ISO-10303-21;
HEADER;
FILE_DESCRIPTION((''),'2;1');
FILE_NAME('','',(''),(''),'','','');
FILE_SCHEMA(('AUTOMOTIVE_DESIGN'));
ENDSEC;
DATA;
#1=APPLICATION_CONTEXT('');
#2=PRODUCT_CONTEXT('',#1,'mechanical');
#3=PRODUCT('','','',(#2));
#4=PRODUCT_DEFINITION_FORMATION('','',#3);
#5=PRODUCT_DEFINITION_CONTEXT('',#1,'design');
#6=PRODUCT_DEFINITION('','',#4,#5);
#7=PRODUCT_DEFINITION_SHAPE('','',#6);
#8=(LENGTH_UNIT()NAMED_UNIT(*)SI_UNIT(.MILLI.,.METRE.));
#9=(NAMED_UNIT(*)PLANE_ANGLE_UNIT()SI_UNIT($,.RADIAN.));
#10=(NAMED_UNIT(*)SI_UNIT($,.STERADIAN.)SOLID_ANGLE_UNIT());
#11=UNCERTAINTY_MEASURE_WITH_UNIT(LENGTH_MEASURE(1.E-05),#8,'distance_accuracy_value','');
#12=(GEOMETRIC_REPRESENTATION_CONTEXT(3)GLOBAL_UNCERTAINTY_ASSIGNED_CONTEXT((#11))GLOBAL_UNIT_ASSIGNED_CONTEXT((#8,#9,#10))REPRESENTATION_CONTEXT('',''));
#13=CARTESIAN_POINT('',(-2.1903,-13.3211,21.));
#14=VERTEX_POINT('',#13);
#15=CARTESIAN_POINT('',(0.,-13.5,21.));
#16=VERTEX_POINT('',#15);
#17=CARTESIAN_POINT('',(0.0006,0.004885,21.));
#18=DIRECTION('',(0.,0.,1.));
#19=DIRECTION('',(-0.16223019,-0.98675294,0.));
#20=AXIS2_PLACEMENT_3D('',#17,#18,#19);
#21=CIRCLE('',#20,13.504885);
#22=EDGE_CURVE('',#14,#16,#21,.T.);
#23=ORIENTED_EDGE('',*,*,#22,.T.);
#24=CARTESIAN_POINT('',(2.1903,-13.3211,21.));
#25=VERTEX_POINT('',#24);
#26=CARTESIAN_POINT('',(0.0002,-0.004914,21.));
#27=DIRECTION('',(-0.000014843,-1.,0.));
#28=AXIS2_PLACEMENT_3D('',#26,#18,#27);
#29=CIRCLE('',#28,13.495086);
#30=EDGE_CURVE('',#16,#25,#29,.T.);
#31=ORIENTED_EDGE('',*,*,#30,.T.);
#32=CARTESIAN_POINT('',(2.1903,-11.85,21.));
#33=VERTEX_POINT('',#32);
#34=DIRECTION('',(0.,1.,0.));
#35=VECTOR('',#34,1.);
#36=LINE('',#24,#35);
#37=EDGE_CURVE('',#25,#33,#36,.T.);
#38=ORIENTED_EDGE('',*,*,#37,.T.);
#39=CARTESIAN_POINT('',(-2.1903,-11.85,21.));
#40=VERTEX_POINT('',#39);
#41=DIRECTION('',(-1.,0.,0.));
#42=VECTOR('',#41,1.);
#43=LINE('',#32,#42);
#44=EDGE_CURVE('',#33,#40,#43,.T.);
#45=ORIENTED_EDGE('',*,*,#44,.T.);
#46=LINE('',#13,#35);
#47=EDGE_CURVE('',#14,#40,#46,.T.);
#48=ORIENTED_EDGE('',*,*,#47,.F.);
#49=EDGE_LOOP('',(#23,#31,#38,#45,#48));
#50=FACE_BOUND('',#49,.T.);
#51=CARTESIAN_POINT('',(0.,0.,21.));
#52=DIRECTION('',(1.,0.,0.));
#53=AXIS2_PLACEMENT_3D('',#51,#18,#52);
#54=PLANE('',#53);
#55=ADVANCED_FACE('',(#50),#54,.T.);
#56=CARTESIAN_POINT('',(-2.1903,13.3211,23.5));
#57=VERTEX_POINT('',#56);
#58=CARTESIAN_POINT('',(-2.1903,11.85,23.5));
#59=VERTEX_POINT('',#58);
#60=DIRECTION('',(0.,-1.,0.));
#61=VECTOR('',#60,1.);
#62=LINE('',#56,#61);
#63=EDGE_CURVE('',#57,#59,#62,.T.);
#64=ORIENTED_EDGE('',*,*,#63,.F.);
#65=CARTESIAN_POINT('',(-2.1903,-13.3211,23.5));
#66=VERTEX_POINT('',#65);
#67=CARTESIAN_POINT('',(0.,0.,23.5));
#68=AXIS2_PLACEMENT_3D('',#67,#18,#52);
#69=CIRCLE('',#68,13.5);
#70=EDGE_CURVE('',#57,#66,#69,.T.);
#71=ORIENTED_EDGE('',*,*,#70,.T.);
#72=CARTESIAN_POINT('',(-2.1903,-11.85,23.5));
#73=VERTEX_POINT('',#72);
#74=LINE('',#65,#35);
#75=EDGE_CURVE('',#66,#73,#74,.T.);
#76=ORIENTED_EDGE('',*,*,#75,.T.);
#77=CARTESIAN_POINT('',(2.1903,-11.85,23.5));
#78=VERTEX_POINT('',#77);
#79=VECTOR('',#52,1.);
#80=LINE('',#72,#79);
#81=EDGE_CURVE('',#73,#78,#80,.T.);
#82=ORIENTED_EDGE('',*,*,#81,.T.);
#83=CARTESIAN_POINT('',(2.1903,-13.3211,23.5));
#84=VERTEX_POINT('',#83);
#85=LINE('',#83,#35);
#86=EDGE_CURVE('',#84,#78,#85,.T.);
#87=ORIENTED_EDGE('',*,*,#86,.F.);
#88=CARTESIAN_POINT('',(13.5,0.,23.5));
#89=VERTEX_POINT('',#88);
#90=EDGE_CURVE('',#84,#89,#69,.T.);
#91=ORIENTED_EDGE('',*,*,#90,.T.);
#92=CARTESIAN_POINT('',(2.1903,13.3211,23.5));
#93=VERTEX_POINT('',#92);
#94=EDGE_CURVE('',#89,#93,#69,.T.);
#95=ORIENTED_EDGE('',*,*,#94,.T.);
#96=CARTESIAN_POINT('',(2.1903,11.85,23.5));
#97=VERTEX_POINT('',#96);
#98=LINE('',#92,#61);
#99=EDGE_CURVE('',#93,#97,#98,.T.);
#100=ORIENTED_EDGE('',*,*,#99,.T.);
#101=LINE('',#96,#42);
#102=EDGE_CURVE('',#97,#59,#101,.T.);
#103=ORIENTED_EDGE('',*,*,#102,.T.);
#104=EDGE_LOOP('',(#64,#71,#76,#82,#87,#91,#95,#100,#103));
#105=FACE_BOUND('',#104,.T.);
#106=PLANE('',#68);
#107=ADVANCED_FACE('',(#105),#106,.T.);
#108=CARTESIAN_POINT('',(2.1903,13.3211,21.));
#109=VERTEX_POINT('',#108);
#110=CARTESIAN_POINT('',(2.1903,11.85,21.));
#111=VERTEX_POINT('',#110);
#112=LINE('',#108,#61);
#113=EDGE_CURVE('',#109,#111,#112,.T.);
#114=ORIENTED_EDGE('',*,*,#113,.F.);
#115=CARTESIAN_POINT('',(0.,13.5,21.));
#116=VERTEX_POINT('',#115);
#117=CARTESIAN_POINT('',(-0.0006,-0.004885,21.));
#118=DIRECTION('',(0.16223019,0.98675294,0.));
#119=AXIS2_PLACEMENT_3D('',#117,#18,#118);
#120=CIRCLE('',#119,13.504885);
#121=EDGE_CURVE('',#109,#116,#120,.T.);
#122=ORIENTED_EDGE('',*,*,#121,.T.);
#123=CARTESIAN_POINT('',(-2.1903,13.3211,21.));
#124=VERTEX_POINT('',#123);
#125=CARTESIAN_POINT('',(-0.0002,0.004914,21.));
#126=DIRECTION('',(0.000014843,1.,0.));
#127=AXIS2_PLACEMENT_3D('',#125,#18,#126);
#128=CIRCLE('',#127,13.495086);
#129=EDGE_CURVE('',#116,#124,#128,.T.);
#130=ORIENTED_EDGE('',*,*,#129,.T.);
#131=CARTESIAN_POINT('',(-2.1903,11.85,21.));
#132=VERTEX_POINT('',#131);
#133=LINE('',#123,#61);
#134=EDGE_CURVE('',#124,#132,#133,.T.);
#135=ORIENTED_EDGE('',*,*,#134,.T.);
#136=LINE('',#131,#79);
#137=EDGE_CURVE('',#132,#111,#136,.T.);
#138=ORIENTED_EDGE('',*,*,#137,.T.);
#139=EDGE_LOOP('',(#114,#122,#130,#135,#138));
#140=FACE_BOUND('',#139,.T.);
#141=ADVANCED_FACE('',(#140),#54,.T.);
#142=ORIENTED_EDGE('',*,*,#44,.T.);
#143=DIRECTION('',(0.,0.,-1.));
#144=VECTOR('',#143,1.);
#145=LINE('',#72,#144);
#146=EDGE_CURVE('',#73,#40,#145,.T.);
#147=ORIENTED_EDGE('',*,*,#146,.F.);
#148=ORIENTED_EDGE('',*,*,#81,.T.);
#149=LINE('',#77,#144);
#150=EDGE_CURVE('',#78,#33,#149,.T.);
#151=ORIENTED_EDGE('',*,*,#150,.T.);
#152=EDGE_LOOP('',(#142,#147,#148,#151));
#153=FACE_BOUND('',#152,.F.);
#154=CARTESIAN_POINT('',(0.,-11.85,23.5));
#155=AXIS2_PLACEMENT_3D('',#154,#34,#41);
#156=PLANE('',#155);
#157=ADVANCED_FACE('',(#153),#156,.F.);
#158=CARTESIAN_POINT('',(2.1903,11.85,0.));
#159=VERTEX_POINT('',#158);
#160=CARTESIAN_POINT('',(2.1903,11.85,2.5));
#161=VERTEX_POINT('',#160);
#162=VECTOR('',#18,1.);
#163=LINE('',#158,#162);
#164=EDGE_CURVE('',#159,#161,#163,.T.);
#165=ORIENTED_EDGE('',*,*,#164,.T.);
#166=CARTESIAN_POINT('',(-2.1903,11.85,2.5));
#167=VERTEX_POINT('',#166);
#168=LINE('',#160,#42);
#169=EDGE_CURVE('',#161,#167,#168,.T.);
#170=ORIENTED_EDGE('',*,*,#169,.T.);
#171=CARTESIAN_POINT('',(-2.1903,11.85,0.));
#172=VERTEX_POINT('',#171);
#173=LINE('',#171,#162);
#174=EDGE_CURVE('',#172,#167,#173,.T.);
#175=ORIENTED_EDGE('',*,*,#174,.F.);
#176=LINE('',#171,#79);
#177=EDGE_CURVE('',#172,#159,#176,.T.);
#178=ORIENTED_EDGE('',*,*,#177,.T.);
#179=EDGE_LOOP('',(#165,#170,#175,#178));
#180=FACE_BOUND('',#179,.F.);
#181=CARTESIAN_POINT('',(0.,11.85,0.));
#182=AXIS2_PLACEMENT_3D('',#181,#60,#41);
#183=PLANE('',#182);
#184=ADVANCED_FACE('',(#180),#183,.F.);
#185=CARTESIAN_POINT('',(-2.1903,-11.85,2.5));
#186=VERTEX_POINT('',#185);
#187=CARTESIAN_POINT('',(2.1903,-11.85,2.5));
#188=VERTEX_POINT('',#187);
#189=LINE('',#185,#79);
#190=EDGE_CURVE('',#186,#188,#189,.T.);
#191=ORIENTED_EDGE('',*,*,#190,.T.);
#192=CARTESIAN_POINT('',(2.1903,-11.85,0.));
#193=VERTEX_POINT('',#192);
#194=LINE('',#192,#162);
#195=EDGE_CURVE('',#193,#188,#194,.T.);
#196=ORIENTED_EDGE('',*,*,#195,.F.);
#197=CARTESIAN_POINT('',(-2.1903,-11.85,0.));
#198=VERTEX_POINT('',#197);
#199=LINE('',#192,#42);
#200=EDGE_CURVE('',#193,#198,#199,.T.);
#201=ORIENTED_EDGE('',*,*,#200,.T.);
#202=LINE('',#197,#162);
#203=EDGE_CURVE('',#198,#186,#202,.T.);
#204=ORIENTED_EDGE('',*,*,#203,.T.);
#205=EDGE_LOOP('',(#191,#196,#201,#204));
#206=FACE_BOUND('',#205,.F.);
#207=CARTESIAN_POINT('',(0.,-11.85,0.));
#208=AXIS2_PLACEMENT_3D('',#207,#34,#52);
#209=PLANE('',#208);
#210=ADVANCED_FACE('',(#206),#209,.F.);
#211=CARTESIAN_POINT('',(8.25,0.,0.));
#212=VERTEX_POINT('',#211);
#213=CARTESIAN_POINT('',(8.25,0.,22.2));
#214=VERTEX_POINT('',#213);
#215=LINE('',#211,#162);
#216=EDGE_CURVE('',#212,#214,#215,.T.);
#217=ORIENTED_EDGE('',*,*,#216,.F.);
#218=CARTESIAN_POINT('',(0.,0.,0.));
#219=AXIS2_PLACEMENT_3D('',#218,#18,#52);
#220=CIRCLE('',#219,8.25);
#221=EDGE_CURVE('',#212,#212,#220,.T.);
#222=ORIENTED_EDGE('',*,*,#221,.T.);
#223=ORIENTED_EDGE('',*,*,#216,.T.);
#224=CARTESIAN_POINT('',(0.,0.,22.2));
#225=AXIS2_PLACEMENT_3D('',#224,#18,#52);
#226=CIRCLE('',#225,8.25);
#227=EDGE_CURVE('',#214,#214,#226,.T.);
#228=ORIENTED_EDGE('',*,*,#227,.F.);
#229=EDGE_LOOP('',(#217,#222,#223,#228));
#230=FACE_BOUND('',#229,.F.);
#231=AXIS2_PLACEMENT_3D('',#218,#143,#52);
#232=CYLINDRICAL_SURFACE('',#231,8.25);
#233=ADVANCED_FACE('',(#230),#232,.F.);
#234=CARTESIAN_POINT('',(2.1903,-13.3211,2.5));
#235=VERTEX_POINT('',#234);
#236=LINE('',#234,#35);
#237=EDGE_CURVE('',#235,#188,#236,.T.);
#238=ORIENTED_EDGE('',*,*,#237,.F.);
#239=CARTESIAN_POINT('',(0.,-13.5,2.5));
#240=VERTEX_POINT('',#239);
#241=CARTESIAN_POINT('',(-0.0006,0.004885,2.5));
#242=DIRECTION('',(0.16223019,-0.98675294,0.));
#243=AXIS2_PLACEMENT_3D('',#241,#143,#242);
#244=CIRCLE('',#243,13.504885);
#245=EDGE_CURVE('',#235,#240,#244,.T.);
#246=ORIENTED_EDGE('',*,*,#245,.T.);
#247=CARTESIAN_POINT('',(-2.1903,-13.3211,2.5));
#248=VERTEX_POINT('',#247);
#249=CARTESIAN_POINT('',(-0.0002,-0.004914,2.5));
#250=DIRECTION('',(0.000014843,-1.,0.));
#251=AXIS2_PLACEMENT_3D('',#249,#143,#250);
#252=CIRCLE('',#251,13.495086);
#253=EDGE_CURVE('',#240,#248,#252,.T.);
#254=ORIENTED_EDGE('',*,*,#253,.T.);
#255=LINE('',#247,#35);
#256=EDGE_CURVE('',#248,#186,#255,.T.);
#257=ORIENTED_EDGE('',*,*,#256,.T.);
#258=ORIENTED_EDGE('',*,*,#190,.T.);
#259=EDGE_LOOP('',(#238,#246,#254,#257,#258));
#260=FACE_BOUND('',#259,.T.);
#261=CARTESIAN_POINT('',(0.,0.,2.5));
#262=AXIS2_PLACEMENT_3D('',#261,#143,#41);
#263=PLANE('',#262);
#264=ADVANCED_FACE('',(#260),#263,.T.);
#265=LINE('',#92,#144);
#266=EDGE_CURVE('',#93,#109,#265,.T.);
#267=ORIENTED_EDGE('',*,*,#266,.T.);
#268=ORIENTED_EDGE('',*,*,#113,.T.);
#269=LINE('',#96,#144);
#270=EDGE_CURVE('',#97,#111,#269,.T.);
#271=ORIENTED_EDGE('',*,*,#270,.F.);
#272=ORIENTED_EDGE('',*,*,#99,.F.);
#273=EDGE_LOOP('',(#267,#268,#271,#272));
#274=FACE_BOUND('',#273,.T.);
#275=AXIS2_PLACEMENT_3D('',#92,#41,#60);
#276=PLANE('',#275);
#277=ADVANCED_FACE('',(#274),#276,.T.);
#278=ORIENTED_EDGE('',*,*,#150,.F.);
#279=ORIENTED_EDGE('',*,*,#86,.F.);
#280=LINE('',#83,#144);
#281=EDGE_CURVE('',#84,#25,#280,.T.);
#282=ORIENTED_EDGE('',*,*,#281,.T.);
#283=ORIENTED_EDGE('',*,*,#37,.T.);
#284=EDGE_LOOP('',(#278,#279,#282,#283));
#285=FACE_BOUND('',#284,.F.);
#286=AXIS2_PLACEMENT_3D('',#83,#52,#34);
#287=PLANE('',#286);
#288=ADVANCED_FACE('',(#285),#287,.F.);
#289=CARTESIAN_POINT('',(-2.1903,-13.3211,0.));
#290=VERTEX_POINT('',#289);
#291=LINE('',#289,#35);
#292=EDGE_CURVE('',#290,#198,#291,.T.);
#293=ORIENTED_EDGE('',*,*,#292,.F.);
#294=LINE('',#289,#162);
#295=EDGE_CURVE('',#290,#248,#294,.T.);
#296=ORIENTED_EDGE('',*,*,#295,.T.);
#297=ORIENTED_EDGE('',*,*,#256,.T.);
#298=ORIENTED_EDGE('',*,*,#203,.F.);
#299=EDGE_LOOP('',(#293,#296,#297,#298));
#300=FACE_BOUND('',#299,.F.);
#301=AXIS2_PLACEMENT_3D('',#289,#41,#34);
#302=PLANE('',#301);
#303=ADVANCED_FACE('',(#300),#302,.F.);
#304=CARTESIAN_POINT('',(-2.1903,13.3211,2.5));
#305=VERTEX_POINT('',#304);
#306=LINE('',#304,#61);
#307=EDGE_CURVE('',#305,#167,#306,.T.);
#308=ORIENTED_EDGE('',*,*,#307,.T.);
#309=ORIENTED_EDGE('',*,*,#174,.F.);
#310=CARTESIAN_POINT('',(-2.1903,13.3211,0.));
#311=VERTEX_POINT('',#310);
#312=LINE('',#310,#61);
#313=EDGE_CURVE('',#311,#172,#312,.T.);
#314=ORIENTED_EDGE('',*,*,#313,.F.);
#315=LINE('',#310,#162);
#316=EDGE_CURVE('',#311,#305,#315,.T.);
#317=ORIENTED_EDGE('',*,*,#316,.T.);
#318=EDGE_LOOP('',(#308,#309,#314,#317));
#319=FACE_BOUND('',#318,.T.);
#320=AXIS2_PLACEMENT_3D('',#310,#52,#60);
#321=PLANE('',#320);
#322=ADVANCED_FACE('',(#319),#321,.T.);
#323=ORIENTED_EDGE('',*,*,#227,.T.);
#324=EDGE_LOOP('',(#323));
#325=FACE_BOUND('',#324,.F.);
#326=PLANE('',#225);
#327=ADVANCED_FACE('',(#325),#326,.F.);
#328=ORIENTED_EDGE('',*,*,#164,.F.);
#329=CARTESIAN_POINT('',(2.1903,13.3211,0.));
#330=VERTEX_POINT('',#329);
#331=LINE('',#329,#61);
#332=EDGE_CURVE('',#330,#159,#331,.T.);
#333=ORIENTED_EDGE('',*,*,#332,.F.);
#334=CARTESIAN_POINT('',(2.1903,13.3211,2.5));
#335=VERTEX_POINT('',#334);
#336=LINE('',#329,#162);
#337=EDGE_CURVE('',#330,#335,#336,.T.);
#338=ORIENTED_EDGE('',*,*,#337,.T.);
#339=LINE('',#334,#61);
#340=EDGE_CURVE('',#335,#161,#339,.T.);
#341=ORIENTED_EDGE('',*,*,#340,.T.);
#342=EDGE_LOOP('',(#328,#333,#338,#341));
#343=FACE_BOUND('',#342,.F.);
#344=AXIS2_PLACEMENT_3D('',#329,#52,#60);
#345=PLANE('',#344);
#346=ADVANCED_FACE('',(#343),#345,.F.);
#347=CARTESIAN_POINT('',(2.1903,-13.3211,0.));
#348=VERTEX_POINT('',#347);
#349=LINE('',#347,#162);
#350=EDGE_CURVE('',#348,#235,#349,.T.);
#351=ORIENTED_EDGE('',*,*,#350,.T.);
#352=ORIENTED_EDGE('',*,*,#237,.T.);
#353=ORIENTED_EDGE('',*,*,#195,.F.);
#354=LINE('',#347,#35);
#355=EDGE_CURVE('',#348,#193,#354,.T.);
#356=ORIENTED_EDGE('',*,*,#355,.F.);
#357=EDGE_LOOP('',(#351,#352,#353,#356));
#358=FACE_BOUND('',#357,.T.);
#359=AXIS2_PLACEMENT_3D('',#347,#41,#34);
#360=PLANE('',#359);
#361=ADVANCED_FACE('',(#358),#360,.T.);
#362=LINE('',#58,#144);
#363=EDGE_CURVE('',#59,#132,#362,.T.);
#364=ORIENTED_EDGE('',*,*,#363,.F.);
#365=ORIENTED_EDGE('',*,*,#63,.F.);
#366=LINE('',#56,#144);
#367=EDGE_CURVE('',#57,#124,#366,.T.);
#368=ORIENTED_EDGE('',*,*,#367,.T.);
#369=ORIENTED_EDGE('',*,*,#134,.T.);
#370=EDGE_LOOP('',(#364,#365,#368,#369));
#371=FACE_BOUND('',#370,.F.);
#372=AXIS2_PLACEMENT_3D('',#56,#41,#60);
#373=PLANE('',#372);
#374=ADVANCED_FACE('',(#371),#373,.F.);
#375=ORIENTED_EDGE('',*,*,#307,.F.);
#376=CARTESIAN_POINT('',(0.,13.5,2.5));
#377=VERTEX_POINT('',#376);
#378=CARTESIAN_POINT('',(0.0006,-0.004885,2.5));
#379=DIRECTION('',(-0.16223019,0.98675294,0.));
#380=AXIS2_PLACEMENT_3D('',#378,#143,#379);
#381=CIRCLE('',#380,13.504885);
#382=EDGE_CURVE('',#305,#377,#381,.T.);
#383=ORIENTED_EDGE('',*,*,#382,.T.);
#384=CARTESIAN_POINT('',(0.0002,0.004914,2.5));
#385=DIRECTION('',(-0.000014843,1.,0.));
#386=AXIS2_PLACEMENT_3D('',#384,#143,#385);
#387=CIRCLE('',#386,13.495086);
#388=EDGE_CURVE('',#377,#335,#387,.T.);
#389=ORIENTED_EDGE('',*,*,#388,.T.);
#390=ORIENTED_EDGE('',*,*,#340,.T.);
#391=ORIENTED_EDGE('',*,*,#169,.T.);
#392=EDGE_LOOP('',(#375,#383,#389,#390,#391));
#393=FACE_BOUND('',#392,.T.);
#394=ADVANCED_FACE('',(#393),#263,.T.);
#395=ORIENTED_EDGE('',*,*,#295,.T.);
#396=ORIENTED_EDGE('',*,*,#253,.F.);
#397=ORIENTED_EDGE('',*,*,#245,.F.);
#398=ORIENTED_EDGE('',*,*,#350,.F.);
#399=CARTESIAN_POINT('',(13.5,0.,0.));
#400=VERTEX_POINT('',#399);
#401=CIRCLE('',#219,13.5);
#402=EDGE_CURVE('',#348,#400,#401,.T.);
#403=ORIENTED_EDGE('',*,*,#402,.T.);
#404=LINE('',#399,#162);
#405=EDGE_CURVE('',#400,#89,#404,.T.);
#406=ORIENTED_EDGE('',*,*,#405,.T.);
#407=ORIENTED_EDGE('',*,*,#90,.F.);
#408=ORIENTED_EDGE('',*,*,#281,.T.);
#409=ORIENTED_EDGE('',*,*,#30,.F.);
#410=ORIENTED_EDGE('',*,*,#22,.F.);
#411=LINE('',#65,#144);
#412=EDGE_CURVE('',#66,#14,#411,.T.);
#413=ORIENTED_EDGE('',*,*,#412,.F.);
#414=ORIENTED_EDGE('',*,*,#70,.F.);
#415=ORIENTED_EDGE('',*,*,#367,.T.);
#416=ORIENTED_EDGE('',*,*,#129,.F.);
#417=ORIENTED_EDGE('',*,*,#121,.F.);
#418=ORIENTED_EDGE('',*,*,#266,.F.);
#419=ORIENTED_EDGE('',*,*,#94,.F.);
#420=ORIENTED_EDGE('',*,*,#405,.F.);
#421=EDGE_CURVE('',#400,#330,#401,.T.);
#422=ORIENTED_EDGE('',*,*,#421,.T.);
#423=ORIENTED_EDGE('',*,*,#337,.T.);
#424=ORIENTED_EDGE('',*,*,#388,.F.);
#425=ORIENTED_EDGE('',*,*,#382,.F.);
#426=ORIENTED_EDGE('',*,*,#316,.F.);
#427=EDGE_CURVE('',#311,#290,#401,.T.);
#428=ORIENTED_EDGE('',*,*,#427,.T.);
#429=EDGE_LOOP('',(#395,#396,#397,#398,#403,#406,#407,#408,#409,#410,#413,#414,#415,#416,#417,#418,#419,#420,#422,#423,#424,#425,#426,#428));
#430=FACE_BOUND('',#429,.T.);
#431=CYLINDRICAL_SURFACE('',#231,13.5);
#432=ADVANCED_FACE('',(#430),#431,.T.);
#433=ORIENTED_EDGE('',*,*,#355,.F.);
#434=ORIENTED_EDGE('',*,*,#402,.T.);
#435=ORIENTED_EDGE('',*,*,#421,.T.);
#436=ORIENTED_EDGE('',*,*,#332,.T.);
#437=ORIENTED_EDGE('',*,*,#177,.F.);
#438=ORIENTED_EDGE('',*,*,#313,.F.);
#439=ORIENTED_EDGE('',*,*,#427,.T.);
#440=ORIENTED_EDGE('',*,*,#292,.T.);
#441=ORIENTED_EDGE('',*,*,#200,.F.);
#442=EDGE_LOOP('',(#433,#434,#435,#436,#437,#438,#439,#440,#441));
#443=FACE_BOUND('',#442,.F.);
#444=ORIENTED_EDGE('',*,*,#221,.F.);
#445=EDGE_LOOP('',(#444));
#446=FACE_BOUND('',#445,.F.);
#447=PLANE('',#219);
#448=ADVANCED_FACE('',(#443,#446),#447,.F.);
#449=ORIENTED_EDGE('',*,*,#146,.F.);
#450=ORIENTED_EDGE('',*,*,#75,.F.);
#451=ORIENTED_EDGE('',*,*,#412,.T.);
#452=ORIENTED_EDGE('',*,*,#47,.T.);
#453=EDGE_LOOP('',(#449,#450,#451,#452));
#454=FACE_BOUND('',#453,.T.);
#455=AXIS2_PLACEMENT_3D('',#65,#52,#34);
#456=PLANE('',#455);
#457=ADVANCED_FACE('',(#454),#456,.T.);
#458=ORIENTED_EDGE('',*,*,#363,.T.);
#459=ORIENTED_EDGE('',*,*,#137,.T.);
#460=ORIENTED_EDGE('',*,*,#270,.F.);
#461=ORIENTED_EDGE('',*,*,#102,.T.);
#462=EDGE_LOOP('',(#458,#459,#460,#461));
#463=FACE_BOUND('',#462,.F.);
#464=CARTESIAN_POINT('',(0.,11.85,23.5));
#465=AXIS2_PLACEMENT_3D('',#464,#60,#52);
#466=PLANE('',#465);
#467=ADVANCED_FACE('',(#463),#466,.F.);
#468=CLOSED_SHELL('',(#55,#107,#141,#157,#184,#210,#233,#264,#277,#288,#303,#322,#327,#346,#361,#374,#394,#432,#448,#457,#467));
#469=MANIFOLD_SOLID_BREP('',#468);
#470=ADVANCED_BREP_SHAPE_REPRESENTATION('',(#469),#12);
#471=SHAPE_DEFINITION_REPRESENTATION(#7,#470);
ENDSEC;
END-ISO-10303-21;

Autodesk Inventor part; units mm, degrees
ref_plane "YZ Plane" through (0, 0, 0) normal (1, 0, 0) x (0, 1, 0)
ref_plane "XZ Plane" through (0, 0, 0) normal (0, 1, 0) x (-1, 0, 0)
ref_plane "XY Plane" through (0, 0, 0) normal (0, 0, 1) x (1, 0, 0)
sketch "Esquisse1" plane through (0, 0, 0) normal (0, 0, 1) x (1, 0, 0)
  circle A0 centre (0, 0) radius 13.5
  circle A1 centre (0, 0) radius 8.25
  dimension "d0" = 27
  dimension "d1" = 16.5
extrude "Extrusion1" add sketch "Esquisse1" along normal blind 23.5
sketch "Esquisse2" plane through (0, 0, 23.5) normal (0, 0, 1) x (1, 0, 0)
  circle A0 centre (0, 0) radius 8.25
extrude "Extrusion2" add sketch "Esquisse2" against normal blind 1.3
sketch "Esquisse3" plane through (0, 0, 0) normal (0, 0, -1) x (-1, 0, 0)
  line L0 (-2.1903, 13.3211) -> (-2.1903, 11.85)
  line L1 (-2.1903, 11.85) -> (0, 11.85)
  line L2 (0, 11.85) -> (2.1903, 11.85)
  line L3 (2.1903, 13.3211) -> (2.1903, 11.85)
  arc A0 (0, 13.5) -> (-2.1903, 13.3211) centre (0, 0) ccw
  arc A1 (2.1903, 13.3211) -> (0, 13.5) centre (0, 0) ccw
  arc A2 (0, -13.5) -> (2.1903, -13.3211) centre (0, 0) ccw
  arc A3 (-2.1903, -13.3211) -> (0, -13.5) centre (0, 0) ccw
  line L4 (-2.1903, -13.3211) -> (-2.1903, -11.85)
  line L5 (0, -11.85) -> (-2.1903, -11.85)
  line L6 (2.1903, -11.85) -> (0, -11.85)
  line L7 (2.1903, -13.3211) -> (2.1903, -11.85)
  point P0 (0, 0)
  point P1 (0, -50)
  point P2 (-13.5, 0)
extrude "Extrusion3" cut sketch "Esquisse3" against normal blind 2.5
sketch "Esquisse4" plane through (0, 0, 23.5) normal (0, 0, 1) x (1, 0, 0)
  line L0 (-2.1903, 13.3211) -> (-2.1903, 11.85)
  line L1 (-2.1903, 11.85) -> (0, 11.85)
  line L2 (0, 11.85) -> (2.1903, 11.85)
  line L3 (2.1903, 13.3211) -> (2.1903, 11.85)
  arc A0 (0, 13.5) -> (-2.1903, 13.3211) centre (0, 0) ccw
  arc A1 (2.1903, 13.3211) -> (0, 13.5) centre (0, 0) ccw
  arc A2 (0, -13.5) -> (2.1903, -13.3211) centre (0, 0) ccw
  arc A3 (-2.1903, -13.3211) -> (0, -13.5) centre (0, 0) ccw
  line L4 (-2.1903, -13.3211) -> (-2.1903, -11.85)
  line L5 (0, -11.85) -> (-2.1903, -11.85)
  line L6 (2.1903, -11.85) -> (0, -11.85)
  line L7 (2.1903, -13.3211) -> (2.1903, -11.85)
  point P0 (0, 0)
  point P1 (0, 0)
extrude "Extrusion4" cut sketch "Esquisse4" against normal blind 2.5
properties part number "pièce intermédiaire"
